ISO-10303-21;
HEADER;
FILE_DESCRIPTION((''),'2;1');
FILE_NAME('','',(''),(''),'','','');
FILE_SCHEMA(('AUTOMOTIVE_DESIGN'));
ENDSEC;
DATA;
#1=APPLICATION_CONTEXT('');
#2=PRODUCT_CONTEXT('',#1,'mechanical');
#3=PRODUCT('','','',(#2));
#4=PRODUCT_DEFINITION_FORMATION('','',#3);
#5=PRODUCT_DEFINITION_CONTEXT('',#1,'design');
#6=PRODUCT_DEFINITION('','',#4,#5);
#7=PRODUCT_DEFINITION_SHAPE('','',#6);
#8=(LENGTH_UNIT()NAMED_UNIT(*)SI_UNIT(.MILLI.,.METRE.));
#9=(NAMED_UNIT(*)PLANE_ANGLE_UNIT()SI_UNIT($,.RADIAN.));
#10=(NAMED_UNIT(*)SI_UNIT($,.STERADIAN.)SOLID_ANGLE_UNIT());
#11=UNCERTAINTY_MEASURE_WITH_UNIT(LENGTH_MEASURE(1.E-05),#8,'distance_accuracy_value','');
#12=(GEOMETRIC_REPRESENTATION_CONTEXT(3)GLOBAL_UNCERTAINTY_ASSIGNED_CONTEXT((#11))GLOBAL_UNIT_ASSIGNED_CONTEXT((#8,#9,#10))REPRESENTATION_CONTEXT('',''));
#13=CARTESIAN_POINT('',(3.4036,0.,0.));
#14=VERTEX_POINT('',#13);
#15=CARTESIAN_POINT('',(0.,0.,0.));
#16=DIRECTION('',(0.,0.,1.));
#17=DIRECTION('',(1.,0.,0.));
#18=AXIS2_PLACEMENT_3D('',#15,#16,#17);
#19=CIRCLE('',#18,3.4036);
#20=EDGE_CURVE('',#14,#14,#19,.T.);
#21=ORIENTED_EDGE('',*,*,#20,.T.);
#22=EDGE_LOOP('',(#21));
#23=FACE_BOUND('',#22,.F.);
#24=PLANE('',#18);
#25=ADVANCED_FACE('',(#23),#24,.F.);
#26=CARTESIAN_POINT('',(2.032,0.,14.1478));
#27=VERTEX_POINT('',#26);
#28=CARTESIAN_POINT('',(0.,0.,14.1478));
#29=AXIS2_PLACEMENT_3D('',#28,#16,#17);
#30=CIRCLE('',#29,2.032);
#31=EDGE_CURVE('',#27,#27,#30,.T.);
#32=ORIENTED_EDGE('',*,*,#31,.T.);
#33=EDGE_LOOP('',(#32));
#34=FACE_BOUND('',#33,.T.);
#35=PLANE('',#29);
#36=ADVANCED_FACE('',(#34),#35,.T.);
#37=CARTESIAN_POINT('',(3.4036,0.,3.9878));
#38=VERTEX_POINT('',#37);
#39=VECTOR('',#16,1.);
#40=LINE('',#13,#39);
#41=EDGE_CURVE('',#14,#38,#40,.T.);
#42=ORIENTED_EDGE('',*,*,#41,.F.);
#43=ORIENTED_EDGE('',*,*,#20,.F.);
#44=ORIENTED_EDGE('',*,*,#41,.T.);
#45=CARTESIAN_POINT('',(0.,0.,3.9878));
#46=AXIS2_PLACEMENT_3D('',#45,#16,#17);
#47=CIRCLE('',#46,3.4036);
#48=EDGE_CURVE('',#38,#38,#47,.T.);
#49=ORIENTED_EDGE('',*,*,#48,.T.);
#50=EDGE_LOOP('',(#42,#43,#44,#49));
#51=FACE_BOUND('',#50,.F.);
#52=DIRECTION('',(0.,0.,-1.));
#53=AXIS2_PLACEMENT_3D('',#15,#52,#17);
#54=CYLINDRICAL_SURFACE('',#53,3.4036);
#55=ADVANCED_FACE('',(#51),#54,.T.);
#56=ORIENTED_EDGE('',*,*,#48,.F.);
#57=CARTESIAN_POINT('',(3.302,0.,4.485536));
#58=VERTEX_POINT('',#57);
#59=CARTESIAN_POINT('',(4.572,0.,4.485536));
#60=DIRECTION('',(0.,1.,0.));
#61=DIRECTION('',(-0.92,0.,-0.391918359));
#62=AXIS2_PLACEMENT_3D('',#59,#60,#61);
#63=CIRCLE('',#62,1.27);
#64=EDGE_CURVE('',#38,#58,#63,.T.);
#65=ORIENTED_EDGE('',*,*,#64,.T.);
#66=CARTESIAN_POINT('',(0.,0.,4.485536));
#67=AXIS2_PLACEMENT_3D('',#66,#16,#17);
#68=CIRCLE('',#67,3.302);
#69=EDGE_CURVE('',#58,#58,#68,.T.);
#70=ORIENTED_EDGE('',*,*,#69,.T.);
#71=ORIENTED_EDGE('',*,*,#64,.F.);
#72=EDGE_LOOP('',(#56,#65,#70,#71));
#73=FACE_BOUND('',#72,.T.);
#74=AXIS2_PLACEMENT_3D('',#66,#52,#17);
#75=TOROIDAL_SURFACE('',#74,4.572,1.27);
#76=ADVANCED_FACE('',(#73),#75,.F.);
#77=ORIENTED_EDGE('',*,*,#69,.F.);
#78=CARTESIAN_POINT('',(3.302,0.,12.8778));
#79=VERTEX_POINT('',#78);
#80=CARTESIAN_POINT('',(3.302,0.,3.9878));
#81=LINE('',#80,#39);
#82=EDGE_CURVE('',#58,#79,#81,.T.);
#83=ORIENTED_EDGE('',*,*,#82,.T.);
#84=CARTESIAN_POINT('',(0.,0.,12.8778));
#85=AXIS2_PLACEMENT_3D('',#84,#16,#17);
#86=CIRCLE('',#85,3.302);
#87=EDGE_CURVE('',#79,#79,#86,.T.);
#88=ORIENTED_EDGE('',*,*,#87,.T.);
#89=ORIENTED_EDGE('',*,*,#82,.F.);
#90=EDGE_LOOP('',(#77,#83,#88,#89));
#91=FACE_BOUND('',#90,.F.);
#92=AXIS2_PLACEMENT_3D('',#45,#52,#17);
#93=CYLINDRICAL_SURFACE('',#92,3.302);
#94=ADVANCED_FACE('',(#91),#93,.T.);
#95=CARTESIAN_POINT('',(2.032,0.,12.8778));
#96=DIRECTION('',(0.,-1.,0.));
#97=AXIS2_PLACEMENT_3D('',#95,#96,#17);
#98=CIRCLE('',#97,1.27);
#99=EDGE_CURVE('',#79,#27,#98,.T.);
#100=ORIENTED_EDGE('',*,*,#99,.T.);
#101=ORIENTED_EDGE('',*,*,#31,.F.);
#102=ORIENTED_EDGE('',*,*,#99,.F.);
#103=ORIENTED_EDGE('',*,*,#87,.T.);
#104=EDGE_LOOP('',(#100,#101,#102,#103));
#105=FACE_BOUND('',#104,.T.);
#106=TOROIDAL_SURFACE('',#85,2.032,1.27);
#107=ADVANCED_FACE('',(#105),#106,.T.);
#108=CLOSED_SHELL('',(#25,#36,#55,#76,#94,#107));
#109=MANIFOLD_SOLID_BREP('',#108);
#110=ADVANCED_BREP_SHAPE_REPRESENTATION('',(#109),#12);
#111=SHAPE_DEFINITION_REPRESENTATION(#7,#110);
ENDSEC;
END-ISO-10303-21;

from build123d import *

# Parameters (mm, degrees)
F0_R     = 3.4036
F1_DEPTH = 3.9878
F2_R     = 3.302
F3_DEPTH = 10.16


# Not quite as in the source:
# - a fillet or chamfer that OpenCascade refuses, or shapes differently, is made with other operations: its cross-section is extruded or revolved along the edge and cut away or added


with BuildPart() as f1:
    # F0 (on Top) → F1 (new body)
    with BuildSketch(Plane.XY):
        Circle(F0_R)
    extrude(amount=F1_DEPTH)

    # F2 (on face) → F3 (join)
    with BuildSketch(Plane.XY.offset(3.9878)):
        Circle(F2_R)
    extrude(amount=F3_DEPTH)

    # F4: fillet of radius 1.27 on 2 edges, made by hand

    # F4_s1 → F4_t2 (revolve)
    with BuildSketch(Plane.XZ):
        with BuildLine():
            ThreePointArc((3.4036, 3.9878), (3.3276592107, 4.2315363157), (3.302, 4.4855363157))
            Line((3.302, 4.4855363157), (3.302, 3.9878))
            Line((3.302, 3.9878), (3.4036, 3.9878))
        make_face()
    revolve(axis=Axis((0, 0, 3.9878), (0, 0, 1)))

    # F4_s3 → F4_t4 (revolve, cut)
    with BuildSketch(Plane.XZ):
        with BuildLine():
            ThreePointArc((3.302, 12.8778), (2.9300256121, 13.7758256121), (2.032, 14.1478))
            Line((2.032, 14.1478), (3.302, 14.1478))
            Line((3.302, 14.1478), (3.302, 12.8778))
        make_face()
    revolve(axis=Axis((0, 0, 14.1478), (0, 0, 1)), mode=Mode.SUBTRACT)


solid = f1.part
